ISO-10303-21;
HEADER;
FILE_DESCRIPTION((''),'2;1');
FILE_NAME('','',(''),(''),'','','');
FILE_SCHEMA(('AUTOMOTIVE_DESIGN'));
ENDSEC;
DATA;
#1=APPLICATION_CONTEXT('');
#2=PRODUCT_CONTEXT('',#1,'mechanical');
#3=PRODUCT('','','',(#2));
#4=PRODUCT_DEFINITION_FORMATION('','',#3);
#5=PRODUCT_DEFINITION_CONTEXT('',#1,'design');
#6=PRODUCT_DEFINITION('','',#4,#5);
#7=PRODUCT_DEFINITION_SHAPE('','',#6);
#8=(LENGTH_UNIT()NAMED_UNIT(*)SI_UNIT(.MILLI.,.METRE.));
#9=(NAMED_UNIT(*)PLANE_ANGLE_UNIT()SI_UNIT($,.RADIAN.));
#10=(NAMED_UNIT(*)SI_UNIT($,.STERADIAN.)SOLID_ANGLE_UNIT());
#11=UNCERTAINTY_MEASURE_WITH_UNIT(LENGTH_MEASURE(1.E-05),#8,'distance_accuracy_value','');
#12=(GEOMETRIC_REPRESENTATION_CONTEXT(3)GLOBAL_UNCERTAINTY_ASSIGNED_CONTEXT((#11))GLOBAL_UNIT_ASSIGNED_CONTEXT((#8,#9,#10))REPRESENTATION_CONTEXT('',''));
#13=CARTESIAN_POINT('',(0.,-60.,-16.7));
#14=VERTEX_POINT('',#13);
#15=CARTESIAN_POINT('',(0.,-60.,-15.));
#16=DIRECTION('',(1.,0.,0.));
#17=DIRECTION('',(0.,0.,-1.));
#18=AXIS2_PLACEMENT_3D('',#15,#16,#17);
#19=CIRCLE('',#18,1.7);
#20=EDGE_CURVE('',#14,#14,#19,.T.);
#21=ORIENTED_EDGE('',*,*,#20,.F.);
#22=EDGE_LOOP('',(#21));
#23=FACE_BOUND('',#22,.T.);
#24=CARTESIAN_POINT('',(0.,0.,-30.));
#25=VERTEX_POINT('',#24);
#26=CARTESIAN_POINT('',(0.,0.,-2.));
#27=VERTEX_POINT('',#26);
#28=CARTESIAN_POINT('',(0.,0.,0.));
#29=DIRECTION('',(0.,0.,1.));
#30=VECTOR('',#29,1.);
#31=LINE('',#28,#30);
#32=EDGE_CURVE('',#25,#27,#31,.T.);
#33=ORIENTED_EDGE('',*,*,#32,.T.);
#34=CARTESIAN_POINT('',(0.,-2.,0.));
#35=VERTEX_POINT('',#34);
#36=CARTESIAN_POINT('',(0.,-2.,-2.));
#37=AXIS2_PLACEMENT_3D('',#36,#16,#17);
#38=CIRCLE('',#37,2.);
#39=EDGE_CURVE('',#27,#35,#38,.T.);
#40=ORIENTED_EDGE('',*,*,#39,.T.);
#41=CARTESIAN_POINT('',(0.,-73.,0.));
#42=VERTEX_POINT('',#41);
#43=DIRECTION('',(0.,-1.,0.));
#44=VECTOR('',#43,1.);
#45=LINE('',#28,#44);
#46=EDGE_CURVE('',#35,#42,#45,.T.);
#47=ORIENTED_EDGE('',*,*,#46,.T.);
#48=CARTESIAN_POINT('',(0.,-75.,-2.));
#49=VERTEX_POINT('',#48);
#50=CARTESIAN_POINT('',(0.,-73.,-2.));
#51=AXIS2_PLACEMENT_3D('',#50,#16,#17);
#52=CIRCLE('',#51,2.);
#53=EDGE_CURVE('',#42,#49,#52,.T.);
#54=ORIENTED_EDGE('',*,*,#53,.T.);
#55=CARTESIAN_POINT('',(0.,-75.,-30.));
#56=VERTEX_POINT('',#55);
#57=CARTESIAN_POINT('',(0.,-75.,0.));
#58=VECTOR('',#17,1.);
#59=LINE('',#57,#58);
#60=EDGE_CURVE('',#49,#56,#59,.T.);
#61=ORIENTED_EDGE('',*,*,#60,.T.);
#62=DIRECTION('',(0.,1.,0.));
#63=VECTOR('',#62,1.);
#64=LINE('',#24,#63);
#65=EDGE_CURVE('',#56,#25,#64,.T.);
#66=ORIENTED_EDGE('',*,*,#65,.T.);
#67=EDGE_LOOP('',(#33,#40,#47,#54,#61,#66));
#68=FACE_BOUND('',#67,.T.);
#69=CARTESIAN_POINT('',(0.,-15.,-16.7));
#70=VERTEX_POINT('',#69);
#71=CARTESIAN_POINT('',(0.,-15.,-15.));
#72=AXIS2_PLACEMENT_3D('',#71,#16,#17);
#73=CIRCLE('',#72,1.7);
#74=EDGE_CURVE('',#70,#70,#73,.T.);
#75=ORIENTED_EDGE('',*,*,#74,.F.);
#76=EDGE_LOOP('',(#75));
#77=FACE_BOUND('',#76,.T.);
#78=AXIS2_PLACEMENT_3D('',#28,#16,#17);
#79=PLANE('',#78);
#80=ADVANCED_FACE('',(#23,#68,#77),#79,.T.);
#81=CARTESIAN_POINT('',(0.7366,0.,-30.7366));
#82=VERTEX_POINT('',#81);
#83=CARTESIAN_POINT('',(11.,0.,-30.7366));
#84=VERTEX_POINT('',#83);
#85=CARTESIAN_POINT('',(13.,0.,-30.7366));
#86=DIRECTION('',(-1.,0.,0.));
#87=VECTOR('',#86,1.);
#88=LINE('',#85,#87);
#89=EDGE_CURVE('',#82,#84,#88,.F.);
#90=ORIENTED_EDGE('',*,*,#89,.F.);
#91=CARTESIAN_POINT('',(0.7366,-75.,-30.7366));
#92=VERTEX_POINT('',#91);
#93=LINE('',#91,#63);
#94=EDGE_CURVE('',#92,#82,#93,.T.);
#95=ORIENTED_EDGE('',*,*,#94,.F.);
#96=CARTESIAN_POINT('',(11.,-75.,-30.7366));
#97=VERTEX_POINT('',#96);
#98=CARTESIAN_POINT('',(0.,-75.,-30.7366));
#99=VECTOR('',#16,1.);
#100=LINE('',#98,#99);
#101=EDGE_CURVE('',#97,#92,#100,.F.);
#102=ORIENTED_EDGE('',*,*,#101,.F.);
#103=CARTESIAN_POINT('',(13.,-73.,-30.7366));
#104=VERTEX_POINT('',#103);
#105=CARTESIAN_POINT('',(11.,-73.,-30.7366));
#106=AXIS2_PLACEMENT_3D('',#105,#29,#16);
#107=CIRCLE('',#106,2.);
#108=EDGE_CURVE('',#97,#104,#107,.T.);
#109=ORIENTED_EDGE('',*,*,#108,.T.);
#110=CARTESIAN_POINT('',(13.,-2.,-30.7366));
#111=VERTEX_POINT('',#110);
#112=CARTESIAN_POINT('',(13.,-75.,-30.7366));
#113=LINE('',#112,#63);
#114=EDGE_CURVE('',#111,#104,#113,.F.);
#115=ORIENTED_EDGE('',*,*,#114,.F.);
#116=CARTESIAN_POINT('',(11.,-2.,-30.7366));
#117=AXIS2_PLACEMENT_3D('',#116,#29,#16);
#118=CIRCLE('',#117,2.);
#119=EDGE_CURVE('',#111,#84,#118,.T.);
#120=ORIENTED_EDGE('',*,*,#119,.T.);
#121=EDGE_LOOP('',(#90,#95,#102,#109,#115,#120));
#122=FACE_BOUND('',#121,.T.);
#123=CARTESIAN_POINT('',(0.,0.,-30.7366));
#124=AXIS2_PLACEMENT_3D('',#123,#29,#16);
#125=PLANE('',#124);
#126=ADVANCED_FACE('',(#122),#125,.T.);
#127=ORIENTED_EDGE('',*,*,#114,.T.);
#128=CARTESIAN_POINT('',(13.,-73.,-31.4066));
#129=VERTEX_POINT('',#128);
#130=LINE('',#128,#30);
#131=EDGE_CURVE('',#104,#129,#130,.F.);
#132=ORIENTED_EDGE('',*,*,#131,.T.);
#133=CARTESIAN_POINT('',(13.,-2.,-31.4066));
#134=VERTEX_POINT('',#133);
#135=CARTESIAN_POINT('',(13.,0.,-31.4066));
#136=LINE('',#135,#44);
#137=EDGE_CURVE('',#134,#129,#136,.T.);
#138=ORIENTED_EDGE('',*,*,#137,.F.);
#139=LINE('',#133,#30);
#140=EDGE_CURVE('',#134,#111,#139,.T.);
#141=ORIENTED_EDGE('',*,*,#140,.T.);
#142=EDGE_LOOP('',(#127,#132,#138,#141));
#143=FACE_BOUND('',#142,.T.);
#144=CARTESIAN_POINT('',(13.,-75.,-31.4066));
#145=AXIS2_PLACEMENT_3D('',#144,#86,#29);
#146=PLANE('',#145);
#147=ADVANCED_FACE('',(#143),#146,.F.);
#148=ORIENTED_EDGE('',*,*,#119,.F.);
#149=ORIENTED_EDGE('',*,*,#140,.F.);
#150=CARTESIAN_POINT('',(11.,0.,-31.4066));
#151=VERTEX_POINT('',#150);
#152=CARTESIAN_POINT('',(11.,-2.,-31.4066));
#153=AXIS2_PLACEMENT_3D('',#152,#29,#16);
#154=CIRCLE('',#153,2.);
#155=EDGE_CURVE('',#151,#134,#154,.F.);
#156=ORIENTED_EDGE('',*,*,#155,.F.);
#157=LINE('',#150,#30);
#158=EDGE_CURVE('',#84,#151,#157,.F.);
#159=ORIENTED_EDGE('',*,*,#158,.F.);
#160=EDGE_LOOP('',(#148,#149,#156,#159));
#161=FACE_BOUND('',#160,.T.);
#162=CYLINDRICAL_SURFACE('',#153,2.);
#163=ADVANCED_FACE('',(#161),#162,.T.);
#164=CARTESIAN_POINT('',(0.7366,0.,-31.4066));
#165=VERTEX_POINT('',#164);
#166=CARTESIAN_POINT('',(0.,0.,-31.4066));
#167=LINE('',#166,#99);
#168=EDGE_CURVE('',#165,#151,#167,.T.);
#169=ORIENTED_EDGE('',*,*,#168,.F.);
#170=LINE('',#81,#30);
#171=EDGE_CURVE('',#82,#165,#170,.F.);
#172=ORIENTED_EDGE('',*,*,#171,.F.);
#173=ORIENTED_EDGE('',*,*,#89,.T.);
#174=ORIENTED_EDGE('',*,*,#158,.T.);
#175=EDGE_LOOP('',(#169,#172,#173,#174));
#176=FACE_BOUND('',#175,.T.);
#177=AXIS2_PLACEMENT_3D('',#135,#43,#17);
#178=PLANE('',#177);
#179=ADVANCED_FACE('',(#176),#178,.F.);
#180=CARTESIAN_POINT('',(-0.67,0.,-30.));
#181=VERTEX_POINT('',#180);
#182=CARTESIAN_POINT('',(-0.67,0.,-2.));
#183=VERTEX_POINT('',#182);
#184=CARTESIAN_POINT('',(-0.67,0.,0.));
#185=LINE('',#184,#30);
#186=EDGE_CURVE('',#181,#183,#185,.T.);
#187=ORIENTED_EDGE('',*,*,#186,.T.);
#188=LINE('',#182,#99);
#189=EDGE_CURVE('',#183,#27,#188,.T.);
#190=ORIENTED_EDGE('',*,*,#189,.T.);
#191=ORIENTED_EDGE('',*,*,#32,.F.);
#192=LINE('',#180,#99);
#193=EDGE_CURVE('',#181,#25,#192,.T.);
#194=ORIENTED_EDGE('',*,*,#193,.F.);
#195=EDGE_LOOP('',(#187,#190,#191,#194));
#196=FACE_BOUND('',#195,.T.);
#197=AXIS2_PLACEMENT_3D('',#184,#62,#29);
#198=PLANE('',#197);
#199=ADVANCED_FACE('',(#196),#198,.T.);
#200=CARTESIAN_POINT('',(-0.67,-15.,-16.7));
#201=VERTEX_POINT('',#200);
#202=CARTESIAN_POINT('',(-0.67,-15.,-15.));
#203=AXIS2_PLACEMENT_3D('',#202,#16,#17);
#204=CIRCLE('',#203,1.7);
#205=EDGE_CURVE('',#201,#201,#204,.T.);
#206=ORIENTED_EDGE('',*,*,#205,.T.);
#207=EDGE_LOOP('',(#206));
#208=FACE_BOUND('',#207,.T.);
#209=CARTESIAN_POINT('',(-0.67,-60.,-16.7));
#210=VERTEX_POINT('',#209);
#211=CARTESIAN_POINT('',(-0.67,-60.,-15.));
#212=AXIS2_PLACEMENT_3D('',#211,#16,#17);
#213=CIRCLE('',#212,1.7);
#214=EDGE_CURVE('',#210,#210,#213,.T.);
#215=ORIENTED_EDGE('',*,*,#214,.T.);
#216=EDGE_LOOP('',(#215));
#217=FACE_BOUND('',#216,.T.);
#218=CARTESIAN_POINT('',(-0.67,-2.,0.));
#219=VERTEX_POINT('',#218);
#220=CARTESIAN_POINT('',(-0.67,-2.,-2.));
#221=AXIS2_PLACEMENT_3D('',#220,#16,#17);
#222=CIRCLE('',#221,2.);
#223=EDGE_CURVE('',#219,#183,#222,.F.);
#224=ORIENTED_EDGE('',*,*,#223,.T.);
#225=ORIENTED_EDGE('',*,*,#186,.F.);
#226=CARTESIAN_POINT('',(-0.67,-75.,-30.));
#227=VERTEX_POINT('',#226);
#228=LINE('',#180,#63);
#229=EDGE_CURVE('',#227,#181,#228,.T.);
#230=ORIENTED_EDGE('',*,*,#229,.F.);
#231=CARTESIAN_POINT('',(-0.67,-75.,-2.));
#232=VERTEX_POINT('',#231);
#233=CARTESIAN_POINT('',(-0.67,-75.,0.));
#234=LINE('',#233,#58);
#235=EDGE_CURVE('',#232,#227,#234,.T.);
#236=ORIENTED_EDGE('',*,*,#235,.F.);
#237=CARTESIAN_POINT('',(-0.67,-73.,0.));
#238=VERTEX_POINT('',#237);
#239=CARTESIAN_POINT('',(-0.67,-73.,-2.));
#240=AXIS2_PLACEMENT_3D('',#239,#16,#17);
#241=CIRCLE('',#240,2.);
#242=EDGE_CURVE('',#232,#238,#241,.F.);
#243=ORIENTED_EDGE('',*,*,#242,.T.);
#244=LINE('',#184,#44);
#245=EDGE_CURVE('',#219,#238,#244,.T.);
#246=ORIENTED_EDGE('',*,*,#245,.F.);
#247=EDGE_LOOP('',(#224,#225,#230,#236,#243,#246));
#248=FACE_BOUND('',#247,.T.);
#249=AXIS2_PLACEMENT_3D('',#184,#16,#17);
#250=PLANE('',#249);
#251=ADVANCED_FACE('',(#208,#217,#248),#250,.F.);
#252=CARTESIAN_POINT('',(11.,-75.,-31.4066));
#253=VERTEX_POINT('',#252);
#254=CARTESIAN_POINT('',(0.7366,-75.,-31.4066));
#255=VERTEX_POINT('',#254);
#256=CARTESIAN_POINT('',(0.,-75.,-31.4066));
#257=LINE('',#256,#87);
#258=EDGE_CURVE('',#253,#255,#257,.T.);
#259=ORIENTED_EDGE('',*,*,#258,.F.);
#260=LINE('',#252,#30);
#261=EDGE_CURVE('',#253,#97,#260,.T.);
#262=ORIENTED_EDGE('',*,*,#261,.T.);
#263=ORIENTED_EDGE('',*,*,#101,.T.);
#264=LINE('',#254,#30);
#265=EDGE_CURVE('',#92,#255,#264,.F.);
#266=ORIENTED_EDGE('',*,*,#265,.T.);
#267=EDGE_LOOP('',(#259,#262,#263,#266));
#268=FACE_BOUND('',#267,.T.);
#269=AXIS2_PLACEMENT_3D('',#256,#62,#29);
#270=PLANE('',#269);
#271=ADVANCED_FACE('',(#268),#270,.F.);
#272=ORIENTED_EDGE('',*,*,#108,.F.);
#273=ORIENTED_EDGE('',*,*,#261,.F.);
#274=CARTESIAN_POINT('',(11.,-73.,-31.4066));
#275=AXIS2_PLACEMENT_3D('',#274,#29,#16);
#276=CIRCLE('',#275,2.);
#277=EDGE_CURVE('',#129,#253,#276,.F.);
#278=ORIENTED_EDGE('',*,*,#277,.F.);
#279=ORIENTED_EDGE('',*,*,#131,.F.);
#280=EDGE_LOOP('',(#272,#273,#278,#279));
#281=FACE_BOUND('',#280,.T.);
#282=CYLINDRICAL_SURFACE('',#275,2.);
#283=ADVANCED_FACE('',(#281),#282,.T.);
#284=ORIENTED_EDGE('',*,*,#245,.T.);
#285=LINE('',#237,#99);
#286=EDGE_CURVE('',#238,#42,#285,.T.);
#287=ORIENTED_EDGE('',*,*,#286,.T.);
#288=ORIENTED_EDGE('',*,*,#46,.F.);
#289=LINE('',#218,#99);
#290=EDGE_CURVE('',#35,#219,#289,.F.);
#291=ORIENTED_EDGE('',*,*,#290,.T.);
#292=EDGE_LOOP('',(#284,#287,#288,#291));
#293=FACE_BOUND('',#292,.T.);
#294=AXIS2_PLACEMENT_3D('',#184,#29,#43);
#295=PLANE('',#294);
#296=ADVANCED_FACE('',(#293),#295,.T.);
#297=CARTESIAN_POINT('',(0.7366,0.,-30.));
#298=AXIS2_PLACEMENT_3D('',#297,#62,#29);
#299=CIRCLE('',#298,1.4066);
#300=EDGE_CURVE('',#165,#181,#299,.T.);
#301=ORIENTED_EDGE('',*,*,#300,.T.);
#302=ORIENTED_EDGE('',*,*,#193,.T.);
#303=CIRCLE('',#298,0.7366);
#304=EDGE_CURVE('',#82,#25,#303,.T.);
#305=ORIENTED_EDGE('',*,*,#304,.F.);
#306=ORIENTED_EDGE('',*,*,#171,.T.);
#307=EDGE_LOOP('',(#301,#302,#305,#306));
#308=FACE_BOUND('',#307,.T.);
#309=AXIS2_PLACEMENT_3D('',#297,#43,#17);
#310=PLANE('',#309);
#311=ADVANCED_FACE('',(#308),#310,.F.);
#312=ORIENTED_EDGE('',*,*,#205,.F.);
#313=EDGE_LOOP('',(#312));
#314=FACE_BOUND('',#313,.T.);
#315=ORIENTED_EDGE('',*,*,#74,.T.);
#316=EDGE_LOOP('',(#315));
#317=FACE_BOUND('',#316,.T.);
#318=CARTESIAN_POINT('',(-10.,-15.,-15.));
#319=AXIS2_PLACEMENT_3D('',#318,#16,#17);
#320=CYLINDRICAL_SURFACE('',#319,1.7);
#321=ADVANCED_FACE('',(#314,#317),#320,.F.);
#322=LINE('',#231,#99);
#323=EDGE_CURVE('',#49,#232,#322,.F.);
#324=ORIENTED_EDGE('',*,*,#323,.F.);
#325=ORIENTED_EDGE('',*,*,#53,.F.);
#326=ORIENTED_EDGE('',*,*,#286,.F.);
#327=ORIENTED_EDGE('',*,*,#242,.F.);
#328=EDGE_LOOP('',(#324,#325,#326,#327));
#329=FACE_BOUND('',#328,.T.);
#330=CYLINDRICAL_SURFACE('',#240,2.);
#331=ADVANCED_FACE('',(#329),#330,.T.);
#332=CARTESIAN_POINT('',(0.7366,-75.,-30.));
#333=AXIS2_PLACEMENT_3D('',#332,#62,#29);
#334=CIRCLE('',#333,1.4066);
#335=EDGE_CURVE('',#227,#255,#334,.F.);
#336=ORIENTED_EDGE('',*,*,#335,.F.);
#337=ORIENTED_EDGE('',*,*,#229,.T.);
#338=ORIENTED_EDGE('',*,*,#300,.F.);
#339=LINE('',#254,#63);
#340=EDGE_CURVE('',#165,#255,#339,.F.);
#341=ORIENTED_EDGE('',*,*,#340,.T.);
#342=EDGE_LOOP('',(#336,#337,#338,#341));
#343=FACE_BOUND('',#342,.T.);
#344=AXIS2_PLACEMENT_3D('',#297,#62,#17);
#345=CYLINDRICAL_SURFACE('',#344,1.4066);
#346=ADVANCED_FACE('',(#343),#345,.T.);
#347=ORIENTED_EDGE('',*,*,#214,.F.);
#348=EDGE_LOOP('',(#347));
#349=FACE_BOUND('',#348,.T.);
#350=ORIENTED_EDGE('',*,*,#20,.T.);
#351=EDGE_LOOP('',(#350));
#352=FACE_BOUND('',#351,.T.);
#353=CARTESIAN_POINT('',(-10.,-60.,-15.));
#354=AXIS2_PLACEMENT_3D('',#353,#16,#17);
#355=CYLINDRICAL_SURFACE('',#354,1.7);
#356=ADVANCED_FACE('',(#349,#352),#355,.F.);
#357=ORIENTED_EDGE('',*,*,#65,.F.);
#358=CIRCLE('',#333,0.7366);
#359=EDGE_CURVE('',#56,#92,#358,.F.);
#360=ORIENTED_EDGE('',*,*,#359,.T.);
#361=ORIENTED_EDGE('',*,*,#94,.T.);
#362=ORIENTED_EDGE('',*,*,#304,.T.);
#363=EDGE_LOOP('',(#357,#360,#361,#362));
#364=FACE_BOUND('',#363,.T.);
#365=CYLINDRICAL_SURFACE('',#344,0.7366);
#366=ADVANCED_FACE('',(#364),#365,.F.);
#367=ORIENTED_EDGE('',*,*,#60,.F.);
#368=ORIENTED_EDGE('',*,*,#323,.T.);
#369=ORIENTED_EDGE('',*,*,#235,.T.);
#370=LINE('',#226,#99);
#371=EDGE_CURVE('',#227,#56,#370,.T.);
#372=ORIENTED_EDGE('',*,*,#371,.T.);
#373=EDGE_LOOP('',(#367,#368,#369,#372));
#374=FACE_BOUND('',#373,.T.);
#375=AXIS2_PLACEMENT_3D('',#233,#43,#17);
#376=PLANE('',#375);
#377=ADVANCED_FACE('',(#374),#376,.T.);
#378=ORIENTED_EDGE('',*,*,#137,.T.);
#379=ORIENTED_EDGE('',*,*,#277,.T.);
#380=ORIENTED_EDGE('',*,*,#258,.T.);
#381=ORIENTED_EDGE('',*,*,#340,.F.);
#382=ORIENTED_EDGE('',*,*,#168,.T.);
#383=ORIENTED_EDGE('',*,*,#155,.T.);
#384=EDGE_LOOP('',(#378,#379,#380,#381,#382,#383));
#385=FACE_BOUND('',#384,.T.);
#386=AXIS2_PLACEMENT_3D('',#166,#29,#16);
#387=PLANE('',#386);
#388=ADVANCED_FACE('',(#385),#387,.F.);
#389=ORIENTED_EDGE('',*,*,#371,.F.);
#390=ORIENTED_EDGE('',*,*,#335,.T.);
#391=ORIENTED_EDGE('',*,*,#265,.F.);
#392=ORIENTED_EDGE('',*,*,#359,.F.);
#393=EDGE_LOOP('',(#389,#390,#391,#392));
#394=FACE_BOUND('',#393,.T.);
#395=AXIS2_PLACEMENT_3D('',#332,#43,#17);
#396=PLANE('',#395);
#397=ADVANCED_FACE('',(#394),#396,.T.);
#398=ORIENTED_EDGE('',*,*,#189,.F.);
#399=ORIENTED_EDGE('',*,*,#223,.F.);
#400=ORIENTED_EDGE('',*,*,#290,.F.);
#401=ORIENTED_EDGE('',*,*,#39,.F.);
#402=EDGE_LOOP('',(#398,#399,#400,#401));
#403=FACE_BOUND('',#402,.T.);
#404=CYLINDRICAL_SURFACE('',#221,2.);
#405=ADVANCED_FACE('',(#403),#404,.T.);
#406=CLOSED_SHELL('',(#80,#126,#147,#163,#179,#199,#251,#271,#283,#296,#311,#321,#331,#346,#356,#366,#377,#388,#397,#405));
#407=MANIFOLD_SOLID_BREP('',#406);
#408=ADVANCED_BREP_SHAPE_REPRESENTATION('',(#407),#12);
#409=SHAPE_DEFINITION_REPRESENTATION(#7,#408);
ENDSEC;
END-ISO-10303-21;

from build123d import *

# Parameters (mm, degrees)
SKETCH1_W          = 30
SKETCH1_H          = 75
BASE_FLANGE1_DEPTH = 0.67
EDGE_FLANGE1_DEPTH = 75
SKETCH7_R          = 1.7
CUT_EXTRUDE1_DEPTH = 10
FILLET1_R          = 2


# Sheet-metal steps are written as plain solids
with BuildPart() as part:
    # Sketch1 → Base-Flange1 (new body)
    with BuildSketch(Plane(origin=(0, 0, 0), x_dir=(0, 0, -1), z_dir=(1, 0, 0))):
        with Locations((15, -37.5)):
            Rectangle(SKETCH1_W, SKETCH1_H)
    extrude(amount=-BASE_FLANGE1_DEPTH)

    # Edge-Flange1 section (across the edge) → Edge-Flange1 (add)
    with BuildSketch(Plane(origin=(0, -75, -30.7366), x_dir=(0, 0, 1), z_dir=(0, 1, 0))):
        with BuildLine():
            Line((-0.67, 0.7366), (-0.67, 13))
            Line((-0.67, 13), (0, 13))
            Line((0, 13), (0, 0.7366))
            ThreePointArc((0, 0.7366), (0.215745145, 0.215745145), (0.7366, 0))
            Line((0.7366, 0), (0.7366, -0.67))
            ThreePointArc((0.7366, -0.67), (-0.258016398, -0.258016398), (-0.67, 0.7366))
        make_face()
    extrude(amount=EDGE_FLANGE1_DEPTH)

    # Sketch7 → Cut-Extrude1 (cut)
    with BuildSketch(Plane(origin=(0, 0, 0), x_dir=(0, 0, -1), z_dir=(1, 0, 0))):
        with Locations((15, -60)):
            Circle(SKETCH7_R)
        with Locations((15, -15)):
            Circle(SKETCH7_R)
    extrude(amount=-CUT_EXTRUDE1_DEPTH, mode=Mode.SUBTRACT)

    # Fillet1
    fillet1_edges = [part.edges().sort_by_distance(p)[0] for p in [
        (13, -75, -31.0716),
        (13, 0, -31.0716),
        (-0.335, 0, 0),
        (-0.335, -75, 0),
    ]]
    fillet(fillet1_edges, radius=FILLET1_R)


solid = part.part
